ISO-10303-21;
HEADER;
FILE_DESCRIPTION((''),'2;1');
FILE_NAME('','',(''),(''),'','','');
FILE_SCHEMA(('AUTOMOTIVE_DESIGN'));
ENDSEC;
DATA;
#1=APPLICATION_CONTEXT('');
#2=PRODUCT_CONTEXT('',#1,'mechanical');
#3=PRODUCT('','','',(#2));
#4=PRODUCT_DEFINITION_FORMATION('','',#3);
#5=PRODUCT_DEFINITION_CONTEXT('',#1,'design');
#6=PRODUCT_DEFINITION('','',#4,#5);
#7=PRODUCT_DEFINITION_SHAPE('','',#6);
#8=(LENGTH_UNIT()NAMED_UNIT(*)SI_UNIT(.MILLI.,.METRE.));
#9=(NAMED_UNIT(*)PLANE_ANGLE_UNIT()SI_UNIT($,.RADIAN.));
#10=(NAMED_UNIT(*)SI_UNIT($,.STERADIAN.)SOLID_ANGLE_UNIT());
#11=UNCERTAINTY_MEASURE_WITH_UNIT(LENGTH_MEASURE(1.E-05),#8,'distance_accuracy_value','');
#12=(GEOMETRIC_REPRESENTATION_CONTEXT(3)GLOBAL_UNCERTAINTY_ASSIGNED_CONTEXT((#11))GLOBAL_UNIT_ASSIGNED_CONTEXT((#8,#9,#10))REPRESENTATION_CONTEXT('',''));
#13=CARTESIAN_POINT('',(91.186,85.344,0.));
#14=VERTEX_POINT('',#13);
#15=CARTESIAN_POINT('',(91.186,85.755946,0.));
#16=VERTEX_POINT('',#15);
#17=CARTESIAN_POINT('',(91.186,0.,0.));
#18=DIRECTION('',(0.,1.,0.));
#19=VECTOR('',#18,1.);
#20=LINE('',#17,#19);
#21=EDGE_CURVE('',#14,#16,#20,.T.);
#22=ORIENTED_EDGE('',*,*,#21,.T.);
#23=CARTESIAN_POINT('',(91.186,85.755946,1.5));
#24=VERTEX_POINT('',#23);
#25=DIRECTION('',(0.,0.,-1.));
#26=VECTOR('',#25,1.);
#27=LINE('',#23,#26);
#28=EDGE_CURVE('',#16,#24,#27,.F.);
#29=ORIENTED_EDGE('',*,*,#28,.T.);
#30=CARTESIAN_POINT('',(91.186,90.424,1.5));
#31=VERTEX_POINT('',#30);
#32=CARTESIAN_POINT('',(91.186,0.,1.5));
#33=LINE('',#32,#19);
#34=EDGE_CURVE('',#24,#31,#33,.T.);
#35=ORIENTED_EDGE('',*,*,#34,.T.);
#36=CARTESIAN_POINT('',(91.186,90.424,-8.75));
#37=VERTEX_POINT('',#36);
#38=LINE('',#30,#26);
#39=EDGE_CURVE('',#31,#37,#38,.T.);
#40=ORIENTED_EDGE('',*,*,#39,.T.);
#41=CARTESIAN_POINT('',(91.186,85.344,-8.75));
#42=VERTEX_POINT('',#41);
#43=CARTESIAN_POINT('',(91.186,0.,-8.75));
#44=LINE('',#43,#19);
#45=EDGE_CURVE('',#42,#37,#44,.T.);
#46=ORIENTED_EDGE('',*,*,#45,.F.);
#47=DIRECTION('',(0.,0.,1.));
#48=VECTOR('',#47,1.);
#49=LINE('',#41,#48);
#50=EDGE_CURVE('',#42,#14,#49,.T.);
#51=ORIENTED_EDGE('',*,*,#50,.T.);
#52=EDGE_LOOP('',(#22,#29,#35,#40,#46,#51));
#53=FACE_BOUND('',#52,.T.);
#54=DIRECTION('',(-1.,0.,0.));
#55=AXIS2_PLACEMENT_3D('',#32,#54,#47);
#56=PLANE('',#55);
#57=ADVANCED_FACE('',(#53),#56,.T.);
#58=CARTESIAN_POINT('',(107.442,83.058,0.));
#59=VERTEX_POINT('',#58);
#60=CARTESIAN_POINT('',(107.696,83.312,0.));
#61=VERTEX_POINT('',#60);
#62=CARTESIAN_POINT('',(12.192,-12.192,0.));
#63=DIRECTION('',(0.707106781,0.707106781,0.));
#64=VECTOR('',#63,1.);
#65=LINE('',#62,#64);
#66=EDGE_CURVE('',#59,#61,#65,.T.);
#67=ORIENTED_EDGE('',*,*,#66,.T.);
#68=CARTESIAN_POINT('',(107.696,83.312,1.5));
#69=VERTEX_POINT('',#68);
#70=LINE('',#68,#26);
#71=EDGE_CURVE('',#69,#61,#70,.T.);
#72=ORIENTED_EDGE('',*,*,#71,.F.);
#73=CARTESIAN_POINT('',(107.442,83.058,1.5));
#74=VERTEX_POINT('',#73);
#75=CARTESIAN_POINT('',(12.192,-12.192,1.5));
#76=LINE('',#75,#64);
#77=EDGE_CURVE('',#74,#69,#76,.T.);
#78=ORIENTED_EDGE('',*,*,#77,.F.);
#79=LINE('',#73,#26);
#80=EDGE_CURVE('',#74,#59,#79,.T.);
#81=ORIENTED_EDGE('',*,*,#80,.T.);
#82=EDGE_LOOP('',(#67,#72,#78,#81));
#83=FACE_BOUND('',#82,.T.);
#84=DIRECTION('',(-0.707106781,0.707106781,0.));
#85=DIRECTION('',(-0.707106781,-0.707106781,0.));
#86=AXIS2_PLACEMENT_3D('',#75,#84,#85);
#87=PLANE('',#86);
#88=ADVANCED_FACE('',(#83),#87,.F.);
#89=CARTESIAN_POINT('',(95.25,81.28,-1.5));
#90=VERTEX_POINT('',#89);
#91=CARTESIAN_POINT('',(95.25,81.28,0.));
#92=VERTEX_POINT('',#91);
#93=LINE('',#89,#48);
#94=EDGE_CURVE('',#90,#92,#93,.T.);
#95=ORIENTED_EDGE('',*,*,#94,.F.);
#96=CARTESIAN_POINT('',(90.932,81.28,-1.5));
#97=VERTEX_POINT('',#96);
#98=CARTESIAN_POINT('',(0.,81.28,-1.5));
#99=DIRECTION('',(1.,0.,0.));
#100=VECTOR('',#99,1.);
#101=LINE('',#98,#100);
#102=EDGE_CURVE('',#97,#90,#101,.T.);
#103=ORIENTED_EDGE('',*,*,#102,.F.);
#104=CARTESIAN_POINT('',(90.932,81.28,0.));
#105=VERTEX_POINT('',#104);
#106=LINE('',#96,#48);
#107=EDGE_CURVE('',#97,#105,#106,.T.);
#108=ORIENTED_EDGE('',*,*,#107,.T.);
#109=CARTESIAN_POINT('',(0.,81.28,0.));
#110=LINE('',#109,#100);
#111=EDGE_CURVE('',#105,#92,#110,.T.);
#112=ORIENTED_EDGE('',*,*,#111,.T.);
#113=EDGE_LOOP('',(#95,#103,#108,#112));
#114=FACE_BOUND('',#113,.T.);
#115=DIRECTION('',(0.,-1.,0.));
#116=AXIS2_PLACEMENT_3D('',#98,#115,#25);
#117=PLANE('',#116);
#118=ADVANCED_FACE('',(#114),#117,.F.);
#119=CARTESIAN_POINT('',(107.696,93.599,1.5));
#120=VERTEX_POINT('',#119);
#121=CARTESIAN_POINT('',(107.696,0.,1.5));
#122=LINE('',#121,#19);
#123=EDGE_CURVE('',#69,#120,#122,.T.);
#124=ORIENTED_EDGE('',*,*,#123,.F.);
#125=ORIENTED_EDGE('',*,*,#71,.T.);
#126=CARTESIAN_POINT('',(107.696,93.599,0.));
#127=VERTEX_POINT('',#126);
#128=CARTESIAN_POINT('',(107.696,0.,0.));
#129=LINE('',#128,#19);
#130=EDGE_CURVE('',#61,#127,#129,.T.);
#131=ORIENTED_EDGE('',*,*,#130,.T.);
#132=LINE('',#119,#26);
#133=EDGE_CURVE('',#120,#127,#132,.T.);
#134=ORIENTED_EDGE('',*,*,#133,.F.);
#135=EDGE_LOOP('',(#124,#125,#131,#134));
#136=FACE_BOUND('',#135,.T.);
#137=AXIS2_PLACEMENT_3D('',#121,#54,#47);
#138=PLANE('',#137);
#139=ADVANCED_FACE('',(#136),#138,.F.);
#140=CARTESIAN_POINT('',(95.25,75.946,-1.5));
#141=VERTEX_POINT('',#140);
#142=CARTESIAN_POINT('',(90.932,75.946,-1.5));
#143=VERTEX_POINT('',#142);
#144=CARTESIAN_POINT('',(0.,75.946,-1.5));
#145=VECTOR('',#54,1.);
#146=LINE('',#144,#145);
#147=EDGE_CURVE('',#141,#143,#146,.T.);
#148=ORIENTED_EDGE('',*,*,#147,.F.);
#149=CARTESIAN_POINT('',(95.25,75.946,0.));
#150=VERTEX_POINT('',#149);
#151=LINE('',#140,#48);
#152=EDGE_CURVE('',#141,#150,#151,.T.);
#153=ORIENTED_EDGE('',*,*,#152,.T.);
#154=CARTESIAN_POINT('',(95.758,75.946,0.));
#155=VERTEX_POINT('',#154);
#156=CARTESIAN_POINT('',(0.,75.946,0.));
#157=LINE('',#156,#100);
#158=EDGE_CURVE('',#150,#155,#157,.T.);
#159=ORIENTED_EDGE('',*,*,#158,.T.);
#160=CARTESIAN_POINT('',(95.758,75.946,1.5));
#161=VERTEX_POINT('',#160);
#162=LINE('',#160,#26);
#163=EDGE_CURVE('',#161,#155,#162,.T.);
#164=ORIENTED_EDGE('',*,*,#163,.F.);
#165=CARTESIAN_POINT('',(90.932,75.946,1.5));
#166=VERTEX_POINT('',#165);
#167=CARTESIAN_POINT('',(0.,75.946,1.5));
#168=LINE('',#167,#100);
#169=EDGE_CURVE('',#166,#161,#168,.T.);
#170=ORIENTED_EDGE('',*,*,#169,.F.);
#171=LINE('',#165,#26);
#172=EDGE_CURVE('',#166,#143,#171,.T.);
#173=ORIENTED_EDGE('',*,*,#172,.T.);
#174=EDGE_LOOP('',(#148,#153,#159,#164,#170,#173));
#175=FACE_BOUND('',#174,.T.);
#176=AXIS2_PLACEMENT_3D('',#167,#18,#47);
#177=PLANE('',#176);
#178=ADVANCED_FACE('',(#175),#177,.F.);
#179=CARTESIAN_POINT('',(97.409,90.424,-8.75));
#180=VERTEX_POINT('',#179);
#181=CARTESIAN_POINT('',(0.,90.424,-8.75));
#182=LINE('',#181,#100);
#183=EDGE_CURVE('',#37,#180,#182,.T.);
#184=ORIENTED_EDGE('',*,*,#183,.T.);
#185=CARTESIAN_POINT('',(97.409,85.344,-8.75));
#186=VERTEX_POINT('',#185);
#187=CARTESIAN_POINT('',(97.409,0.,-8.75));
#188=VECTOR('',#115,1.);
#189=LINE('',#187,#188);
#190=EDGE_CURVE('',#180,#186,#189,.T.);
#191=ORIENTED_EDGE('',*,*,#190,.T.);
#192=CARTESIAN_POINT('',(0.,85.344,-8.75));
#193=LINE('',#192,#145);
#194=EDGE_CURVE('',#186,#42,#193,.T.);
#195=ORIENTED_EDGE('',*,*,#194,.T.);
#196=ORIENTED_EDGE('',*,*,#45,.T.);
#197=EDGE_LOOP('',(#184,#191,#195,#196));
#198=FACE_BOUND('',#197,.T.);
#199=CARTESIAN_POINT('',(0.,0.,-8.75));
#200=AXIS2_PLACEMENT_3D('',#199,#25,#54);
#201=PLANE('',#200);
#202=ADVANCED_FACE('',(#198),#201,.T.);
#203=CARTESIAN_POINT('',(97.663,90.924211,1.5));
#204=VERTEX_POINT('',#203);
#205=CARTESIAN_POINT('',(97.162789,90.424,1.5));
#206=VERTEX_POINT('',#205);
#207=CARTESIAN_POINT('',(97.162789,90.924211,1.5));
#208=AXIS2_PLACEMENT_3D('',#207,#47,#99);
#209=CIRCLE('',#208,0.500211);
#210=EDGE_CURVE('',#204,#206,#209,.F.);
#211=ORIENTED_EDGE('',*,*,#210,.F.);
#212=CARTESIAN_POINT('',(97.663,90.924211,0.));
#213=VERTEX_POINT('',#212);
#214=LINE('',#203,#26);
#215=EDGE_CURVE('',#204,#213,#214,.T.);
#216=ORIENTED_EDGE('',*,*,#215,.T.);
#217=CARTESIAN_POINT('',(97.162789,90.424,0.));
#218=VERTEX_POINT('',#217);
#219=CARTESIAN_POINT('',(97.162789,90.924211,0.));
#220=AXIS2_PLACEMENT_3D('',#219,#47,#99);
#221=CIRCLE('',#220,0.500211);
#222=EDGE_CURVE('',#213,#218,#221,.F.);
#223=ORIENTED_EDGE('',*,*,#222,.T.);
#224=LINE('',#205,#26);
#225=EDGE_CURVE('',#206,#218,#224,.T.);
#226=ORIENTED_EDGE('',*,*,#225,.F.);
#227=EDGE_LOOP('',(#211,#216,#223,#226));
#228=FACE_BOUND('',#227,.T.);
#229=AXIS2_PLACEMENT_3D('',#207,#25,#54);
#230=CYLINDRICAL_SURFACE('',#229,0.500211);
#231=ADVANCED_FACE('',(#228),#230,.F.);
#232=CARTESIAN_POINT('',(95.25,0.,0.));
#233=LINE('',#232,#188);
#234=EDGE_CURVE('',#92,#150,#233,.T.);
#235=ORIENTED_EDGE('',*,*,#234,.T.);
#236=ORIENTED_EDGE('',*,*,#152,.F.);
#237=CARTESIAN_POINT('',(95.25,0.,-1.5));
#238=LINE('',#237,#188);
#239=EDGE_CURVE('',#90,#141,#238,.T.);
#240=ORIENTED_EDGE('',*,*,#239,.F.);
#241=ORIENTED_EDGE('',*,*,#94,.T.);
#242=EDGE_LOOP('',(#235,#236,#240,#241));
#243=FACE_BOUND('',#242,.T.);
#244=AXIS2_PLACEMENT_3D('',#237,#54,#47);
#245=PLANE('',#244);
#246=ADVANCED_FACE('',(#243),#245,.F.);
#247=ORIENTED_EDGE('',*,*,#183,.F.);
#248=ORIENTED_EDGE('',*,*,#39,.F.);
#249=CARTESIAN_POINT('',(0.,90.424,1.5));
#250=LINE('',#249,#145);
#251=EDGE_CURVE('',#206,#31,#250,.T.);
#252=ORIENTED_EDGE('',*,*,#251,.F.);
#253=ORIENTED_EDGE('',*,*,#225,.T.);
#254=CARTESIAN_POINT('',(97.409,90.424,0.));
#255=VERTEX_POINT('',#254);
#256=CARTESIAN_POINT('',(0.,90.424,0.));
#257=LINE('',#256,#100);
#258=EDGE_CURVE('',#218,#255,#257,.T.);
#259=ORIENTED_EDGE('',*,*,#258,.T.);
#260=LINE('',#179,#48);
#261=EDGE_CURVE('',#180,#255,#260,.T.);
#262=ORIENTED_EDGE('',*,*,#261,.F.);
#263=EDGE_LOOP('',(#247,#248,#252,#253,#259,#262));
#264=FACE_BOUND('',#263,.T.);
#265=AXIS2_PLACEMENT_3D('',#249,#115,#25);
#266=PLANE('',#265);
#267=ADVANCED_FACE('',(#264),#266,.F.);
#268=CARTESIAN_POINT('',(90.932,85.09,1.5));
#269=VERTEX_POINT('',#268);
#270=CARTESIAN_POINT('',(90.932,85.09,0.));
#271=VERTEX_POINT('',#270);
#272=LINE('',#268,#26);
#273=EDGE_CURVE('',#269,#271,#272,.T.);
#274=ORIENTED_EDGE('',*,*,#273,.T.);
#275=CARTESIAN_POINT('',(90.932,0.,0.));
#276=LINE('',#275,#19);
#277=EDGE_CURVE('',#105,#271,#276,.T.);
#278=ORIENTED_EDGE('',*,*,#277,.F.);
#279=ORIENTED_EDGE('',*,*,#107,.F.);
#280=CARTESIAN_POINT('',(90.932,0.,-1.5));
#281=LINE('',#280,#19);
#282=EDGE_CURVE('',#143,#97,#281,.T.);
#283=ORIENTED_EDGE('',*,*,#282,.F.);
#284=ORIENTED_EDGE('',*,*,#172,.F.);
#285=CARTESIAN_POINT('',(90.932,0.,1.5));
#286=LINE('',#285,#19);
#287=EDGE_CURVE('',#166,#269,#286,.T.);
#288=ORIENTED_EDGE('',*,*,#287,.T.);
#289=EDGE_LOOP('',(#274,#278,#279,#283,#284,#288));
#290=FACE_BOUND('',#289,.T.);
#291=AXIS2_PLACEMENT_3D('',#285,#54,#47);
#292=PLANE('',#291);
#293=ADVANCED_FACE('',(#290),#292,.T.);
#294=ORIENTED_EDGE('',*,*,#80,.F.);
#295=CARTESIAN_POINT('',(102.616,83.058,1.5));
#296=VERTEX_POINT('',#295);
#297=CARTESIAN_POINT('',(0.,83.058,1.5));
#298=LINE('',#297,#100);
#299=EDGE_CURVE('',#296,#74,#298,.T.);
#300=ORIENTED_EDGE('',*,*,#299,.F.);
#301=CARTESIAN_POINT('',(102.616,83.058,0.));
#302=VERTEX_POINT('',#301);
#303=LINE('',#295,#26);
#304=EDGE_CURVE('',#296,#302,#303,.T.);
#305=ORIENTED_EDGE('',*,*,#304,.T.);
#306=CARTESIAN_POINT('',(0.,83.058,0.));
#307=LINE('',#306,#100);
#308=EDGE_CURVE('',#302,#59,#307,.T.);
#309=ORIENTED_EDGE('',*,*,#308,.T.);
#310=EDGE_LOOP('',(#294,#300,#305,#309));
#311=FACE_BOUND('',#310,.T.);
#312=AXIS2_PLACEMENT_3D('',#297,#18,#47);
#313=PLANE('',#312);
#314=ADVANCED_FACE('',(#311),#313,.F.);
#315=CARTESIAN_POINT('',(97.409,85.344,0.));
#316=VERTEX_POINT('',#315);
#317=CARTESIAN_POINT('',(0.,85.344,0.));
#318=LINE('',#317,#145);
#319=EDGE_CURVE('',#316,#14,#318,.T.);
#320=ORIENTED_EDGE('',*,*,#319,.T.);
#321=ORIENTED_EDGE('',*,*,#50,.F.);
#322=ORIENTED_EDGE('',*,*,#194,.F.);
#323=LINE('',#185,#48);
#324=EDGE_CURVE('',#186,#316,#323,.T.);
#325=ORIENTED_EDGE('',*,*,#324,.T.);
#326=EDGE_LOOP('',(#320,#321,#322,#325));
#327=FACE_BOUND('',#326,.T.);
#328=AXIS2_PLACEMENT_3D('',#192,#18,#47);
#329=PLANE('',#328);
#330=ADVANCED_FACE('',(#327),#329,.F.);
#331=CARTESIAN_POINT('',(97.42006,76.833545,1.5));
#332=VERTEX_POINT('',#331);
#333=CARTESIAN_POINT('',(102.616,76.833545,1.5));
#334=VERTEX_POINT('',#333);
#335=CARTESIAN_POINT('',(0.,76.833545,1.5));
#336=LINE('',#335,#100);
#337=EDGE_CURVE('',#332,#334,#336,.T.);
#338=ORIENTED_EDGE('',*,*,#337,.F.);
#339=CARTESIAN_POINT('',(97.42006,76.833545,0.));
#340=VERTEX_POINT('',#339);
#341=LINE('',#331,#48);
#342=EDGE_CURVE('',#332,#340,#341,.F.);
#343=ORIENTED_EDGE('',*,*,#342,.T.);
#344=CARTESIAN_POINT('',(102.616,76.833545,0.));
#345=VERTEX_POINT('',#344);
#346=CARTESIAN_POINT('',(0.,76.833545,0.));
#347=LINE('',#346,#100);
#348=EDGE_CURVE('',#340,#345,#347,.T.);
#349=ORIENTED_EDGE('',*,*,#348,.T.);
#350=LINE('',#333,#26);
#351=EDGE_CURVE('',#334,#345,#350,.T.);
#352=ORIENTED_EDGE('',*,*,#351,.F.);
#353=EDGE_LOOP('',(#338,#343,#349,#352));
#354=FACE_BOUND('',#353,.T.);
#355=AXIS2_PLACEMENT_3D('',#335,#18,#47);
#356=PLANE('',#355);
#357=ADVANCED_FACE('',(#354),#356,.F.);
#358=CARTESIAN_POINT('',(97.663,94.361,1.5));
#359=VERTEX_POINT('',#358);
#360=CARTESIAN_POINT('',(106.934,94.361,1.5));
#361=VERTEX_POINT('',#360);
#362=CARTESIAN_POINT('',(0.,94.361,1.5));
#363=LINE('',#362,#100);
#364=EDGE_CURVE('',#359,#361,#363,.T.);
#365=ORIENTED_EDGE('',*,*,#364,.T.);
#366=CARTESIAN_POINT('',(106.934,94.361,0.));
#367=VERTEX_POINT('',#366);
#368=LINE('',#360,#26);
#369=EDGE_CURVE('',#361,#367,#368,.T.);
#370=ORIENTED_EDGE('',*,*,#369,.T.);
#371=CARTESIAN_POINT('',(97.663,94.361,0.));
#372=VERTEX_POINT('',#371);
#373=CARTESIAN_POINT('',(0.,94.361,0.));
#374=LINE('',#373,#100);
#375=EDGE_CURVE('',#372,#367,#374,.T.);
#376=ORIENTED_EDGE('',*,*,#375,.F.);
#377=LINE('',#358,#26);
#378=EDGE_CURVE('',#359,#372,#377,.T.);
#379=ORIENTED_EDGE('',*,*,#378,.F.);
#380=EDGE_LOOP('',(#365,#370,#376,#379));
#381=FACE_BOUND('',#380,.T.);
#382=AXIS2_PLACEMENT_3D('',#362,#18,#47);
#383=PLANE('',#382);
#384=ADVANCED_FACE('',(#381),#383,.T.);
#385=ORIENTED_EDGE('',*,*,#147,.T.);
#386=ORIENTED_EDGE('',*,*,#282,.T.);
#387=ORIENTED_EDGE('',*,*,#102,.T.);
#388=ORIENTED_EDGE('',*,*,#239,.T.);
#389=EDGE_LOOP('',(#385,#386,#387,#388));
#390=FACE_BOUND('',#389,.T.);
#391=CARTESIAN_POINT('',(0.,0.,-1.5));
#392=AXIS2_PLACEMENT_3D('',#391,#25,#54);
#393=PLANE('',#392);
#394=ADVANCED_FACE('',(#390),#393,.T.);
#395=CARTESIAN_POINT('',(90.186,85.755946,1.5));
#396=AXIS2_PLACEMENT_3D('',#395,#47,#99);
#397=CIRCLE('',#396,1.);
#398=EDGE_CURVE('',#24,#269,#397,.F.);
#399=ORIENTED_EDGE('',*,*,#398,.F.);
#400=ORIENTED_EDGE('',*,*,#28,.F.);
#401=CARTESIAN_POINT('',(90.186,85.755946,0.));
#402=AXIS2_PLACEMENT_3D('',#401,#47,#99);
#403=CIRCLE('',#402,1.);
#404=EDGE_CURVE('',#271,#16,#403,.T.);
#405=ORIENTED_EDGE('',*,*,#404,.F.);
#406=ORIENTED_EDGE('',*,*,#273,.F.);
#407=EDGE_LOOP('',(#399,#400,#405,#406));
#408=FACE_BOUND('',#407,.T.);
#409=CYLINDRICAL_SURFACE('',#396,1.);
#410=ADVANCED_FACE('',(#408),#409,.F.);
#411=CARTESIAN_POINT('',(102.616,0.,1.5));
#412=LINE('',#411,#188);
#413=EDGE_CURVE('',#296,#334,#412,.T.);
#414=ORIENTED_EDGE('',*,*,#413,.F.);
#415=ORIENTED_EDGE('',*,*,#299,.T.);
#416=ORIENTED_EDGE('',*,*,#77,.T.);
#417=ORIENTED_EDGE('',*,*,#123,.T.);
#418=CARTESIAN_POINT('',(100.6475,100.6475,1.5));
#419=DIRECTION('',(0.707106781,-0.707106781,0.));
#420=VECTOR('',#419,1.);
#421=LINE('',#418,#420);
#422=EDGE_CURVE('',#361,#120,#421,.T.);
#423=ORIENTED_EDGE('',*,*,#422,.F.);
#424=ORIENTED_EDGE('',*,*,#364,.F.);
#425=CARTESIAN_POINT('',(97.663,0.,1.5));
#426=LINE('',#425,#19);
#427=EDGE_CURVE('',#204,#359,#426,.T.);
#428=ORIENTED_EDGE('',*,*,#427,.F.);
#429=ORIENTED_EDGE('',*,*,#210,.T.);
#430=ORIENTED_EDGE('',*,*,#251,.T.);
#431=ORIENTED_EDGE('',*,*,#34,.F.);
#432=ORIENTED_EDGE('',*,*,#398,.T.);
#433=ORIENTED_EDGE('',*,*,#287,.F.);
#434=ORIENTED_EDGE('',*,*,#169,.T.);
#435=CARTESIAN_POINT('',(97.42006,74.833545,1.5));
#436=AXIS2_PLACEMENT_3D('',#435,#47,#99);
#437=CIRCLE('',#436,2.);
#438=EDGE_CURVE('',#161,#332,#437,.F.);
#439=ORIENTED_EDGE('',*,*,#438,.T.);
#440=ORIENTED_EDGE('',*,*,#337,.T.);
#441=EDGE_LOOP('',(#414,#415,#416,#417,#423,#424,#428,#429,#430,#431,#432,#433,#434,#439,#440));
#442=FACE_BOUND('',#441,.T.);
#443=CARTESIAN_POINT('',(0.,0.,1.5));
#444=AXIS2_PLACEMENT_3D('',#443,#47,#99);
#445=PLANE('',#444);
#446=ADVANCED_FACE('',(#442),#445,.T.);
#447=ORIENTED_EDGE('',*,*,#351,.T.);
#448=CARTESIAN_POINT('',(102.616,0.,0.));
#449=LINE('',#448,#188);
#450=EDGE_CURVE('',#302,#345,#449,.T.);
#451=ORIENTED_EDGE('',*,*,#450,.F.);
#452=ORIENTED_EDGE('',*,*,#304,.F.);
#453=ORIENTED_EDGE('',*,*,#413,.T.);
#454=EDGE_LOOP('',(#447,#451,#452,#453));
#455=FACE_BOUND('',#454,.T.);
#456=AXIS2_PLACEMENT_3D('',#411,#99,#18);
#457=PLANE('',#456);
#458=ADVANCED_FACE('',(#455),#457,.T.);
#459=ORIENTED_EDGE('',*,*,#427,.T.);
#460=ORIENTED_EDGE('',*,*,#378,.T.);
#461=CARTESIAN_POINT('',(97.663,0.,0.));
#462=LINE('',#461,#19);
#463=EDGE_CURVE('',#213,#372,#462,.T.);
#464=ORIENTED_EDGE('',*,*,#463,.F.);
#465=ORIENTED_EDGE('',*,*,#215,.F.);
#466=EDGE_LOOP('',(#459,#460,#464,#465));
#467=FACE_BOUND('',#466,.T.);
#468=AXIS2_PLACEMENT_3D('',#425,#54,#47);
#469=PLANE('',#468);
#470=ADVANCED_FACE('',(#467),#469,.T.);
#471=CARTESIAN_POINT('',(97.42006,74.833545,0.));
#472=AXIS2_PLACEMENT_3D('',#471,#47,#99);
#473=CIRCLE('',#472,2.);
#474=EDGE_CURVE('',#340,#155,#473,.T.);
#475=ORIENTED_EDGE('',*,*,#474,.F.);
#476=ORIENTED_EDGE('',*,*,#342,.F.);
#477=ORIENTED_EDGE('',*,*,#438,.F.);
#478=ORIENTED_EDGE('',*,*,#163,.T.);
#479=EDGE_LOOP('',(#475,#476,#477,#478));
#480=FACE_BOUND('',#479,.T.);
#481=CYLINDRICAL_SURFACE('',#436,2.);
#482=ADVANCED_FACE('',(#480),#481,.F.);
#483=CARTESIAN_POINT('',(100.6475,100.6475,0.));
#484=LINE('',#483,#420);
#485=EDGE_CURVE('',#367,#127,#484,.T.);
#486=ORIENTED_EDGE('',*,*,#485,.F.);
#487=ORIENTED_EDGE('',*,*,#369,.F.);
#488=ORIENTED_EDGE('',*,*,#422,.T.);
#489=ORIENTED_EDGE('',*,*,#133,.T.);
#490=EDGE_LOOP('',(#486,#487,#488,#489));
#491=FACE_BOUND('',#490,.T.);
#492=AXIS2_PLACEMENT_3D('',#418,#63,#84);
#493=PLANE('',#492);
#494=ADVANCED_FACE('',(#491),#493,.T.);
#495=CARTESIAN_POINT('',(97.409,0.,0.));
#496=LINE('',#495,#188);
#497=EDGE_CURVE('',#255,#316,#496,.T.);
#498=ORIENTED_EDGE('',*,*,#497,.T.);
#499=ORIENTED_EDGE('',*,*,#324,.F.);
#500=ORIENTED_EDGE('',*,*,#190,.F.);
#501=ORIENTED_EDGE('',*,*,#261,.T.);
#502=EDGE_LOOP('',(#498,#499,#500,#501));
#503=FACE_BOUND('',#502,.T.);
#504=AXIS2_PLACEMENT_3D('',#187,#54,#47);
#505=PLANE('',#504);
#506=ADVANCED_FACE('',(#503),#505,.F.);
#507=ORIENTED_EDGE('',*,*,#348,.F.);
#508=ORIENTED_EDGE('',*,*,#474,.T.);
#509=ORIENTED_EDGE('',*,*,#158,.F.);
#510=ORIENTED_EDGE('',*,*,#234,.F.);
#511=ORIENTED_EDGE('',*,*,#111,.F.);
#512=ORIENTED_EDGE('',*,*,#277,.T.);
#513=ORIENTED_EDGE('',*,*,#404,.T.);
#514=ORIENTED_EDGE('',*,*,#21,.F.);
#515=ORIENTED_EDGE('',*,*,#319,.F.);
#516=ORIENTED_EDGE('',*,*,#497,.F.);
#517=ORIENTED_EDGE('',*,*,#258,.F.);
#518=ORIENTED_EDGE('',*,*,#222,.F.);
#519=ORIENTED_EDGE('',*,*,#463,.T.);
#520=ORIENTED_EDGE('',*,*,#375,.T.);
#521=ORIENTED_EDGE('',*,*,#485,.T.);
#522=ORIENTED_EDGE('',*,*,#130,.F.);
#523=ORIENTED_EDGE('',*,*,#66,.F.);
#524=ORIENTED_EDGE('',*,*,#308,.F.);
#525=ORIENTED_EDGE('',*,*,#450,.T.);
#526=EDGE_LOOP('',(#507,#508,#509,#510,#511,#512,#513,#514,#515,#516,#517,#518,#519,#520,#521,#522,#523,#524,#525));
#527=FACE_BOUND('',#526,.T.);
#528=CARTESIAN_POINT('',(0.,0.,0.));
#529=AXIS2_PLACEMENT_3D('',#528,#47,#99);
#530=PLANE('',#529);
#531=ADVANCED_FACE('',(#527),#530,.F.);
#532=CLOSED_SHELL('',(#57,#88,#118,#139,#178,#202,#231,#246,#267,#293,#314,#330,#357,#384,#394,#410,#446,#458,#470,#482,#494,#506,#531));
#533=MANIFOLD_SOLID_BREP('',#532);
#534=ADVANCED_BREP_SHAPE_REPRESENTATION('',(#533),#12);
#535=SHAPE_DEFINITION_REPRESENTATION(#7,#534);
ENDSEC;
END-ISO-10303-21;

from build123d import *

# Parameters (mm, degrees)
EXTRUDE_1_DEPTH = 1.5
SKETCH_2_W      = 4.318
SKETCH_2_H      = 5.334
EXTRUDE_2_DEPTH = 1.5
SKETCH_3_W      = 6.223
SKETCH_3_H      = 5.08
EXTRUDE_3_DEPTH = 8.75
FILLET_1_R      = 1
FILLET_2_R      = 2


with BuildPart() as part:
    # 草图1 → 凸台-拉伸1 (new body)
    with BuildSketch(Plane.XY):
        with BuildLine():
            Line((90.932, 85.09), (91.186, 85.344))
            Line((91.186, 85.344), (91.186, 90.424))
            Line((91.186, 90.424), (97.162789, 90.424))
            ThreePointArc((97.162789, 90.424), (97.51649159, 90.57050841), (97.663, 90.924211))
            Line((97.663, 90.924211), (97.663, 94.361))
            Line((97.663, 94.361), (106.934, 94.361))
            Line((106.934, 94.361), (107.696, 93.599))
            Line((107.696, 93.599), (107.696, 83.312))
            Line((107.696, 83.312), (107.442, 83.058))
            Line((107.442, 83.058), (102.616, 83.058))
            Line((102.616, 83.058), (102.616, 76.833545254))
            Line((102.616, 76.833545254), (95.758, 76.833545254))
            Line((95.758, 76.833545254), (95.758, 75.946))
            Line((95.758, 75.946), (90.932, 75.946))
            Line((90.932, 75.946), (90.932, 85.09))
        make_face()
    extrude(amount=EXTRUDE_1_DEPTH)

    # 草图2 → 凸台-拉伸2 (add)
    with BuildSketch(Plane.XY):
        with Locations((93.091, 78.613)):
            Rectangle(SKETCH_2_W, SKETCH_2_H)
    extrude(amount=-EXTRUDE_2_DEPTH)

    # 草图3 → 凸台-拉伸3 (add)
    with BuildSketch(Plane.XY):
        with Locations((94.2975, 87.884)):
            Rectangle(SKETCH_3_W, SKETCH_3_H)
    extrude(amount=-EXTRUDE_3_DEPTH)

    # 圆角1
    # the kernel refuses this fillet: 1 mm, written as the material it adds along each edge
    with BuildSketch(Plane(origin=(91.186, 85.344, 0), x_dir=(-0.7071067811889411, -0.7071067811841542, 0), z_dir=(0, 0, 1))) as fillet_1_piece_1:
        with BuildLine():
            CenterArc((0.415817011, -0.998396551), FILLET_1_R, 93.245063402, 41.754936598)
            Line((-0.29128977, -0.29128977), (0, 0))
            Line((0, 0), (0.359210245, 0))
        make_face()
    extrude(amount=1.5)

    # 圆角2
    # the kernel refuses this fillet: 2 mm, written as the material it adds along each edge
    with BuildSketch(Plane(origin=(95.758, 76.833545254, 0), x_dir=(1, 0, 0), z_dir=(0, 0, 1))) as fillet_2_piece_1:
        with BuildLine():
            CenterArc((1.662060299, -2), FILLET_2_R, 90, 56.204705158)
            Line((0, -0.887545254), (-0.033241206, -0.86529616))
            ThreePointArc((-0.033241206, -0.86529616), (-0.04, -0.443772627), (-0.04, 0))
            Line((-0.04, 0), (0, 0.04))
            Line((0, 0.04), (1.662060299, 0.04))
            Line((1.662060299, 0.04), (1.662060299, 0))
        make_face()
    extrude(amount=1.5)


solid = part.part
